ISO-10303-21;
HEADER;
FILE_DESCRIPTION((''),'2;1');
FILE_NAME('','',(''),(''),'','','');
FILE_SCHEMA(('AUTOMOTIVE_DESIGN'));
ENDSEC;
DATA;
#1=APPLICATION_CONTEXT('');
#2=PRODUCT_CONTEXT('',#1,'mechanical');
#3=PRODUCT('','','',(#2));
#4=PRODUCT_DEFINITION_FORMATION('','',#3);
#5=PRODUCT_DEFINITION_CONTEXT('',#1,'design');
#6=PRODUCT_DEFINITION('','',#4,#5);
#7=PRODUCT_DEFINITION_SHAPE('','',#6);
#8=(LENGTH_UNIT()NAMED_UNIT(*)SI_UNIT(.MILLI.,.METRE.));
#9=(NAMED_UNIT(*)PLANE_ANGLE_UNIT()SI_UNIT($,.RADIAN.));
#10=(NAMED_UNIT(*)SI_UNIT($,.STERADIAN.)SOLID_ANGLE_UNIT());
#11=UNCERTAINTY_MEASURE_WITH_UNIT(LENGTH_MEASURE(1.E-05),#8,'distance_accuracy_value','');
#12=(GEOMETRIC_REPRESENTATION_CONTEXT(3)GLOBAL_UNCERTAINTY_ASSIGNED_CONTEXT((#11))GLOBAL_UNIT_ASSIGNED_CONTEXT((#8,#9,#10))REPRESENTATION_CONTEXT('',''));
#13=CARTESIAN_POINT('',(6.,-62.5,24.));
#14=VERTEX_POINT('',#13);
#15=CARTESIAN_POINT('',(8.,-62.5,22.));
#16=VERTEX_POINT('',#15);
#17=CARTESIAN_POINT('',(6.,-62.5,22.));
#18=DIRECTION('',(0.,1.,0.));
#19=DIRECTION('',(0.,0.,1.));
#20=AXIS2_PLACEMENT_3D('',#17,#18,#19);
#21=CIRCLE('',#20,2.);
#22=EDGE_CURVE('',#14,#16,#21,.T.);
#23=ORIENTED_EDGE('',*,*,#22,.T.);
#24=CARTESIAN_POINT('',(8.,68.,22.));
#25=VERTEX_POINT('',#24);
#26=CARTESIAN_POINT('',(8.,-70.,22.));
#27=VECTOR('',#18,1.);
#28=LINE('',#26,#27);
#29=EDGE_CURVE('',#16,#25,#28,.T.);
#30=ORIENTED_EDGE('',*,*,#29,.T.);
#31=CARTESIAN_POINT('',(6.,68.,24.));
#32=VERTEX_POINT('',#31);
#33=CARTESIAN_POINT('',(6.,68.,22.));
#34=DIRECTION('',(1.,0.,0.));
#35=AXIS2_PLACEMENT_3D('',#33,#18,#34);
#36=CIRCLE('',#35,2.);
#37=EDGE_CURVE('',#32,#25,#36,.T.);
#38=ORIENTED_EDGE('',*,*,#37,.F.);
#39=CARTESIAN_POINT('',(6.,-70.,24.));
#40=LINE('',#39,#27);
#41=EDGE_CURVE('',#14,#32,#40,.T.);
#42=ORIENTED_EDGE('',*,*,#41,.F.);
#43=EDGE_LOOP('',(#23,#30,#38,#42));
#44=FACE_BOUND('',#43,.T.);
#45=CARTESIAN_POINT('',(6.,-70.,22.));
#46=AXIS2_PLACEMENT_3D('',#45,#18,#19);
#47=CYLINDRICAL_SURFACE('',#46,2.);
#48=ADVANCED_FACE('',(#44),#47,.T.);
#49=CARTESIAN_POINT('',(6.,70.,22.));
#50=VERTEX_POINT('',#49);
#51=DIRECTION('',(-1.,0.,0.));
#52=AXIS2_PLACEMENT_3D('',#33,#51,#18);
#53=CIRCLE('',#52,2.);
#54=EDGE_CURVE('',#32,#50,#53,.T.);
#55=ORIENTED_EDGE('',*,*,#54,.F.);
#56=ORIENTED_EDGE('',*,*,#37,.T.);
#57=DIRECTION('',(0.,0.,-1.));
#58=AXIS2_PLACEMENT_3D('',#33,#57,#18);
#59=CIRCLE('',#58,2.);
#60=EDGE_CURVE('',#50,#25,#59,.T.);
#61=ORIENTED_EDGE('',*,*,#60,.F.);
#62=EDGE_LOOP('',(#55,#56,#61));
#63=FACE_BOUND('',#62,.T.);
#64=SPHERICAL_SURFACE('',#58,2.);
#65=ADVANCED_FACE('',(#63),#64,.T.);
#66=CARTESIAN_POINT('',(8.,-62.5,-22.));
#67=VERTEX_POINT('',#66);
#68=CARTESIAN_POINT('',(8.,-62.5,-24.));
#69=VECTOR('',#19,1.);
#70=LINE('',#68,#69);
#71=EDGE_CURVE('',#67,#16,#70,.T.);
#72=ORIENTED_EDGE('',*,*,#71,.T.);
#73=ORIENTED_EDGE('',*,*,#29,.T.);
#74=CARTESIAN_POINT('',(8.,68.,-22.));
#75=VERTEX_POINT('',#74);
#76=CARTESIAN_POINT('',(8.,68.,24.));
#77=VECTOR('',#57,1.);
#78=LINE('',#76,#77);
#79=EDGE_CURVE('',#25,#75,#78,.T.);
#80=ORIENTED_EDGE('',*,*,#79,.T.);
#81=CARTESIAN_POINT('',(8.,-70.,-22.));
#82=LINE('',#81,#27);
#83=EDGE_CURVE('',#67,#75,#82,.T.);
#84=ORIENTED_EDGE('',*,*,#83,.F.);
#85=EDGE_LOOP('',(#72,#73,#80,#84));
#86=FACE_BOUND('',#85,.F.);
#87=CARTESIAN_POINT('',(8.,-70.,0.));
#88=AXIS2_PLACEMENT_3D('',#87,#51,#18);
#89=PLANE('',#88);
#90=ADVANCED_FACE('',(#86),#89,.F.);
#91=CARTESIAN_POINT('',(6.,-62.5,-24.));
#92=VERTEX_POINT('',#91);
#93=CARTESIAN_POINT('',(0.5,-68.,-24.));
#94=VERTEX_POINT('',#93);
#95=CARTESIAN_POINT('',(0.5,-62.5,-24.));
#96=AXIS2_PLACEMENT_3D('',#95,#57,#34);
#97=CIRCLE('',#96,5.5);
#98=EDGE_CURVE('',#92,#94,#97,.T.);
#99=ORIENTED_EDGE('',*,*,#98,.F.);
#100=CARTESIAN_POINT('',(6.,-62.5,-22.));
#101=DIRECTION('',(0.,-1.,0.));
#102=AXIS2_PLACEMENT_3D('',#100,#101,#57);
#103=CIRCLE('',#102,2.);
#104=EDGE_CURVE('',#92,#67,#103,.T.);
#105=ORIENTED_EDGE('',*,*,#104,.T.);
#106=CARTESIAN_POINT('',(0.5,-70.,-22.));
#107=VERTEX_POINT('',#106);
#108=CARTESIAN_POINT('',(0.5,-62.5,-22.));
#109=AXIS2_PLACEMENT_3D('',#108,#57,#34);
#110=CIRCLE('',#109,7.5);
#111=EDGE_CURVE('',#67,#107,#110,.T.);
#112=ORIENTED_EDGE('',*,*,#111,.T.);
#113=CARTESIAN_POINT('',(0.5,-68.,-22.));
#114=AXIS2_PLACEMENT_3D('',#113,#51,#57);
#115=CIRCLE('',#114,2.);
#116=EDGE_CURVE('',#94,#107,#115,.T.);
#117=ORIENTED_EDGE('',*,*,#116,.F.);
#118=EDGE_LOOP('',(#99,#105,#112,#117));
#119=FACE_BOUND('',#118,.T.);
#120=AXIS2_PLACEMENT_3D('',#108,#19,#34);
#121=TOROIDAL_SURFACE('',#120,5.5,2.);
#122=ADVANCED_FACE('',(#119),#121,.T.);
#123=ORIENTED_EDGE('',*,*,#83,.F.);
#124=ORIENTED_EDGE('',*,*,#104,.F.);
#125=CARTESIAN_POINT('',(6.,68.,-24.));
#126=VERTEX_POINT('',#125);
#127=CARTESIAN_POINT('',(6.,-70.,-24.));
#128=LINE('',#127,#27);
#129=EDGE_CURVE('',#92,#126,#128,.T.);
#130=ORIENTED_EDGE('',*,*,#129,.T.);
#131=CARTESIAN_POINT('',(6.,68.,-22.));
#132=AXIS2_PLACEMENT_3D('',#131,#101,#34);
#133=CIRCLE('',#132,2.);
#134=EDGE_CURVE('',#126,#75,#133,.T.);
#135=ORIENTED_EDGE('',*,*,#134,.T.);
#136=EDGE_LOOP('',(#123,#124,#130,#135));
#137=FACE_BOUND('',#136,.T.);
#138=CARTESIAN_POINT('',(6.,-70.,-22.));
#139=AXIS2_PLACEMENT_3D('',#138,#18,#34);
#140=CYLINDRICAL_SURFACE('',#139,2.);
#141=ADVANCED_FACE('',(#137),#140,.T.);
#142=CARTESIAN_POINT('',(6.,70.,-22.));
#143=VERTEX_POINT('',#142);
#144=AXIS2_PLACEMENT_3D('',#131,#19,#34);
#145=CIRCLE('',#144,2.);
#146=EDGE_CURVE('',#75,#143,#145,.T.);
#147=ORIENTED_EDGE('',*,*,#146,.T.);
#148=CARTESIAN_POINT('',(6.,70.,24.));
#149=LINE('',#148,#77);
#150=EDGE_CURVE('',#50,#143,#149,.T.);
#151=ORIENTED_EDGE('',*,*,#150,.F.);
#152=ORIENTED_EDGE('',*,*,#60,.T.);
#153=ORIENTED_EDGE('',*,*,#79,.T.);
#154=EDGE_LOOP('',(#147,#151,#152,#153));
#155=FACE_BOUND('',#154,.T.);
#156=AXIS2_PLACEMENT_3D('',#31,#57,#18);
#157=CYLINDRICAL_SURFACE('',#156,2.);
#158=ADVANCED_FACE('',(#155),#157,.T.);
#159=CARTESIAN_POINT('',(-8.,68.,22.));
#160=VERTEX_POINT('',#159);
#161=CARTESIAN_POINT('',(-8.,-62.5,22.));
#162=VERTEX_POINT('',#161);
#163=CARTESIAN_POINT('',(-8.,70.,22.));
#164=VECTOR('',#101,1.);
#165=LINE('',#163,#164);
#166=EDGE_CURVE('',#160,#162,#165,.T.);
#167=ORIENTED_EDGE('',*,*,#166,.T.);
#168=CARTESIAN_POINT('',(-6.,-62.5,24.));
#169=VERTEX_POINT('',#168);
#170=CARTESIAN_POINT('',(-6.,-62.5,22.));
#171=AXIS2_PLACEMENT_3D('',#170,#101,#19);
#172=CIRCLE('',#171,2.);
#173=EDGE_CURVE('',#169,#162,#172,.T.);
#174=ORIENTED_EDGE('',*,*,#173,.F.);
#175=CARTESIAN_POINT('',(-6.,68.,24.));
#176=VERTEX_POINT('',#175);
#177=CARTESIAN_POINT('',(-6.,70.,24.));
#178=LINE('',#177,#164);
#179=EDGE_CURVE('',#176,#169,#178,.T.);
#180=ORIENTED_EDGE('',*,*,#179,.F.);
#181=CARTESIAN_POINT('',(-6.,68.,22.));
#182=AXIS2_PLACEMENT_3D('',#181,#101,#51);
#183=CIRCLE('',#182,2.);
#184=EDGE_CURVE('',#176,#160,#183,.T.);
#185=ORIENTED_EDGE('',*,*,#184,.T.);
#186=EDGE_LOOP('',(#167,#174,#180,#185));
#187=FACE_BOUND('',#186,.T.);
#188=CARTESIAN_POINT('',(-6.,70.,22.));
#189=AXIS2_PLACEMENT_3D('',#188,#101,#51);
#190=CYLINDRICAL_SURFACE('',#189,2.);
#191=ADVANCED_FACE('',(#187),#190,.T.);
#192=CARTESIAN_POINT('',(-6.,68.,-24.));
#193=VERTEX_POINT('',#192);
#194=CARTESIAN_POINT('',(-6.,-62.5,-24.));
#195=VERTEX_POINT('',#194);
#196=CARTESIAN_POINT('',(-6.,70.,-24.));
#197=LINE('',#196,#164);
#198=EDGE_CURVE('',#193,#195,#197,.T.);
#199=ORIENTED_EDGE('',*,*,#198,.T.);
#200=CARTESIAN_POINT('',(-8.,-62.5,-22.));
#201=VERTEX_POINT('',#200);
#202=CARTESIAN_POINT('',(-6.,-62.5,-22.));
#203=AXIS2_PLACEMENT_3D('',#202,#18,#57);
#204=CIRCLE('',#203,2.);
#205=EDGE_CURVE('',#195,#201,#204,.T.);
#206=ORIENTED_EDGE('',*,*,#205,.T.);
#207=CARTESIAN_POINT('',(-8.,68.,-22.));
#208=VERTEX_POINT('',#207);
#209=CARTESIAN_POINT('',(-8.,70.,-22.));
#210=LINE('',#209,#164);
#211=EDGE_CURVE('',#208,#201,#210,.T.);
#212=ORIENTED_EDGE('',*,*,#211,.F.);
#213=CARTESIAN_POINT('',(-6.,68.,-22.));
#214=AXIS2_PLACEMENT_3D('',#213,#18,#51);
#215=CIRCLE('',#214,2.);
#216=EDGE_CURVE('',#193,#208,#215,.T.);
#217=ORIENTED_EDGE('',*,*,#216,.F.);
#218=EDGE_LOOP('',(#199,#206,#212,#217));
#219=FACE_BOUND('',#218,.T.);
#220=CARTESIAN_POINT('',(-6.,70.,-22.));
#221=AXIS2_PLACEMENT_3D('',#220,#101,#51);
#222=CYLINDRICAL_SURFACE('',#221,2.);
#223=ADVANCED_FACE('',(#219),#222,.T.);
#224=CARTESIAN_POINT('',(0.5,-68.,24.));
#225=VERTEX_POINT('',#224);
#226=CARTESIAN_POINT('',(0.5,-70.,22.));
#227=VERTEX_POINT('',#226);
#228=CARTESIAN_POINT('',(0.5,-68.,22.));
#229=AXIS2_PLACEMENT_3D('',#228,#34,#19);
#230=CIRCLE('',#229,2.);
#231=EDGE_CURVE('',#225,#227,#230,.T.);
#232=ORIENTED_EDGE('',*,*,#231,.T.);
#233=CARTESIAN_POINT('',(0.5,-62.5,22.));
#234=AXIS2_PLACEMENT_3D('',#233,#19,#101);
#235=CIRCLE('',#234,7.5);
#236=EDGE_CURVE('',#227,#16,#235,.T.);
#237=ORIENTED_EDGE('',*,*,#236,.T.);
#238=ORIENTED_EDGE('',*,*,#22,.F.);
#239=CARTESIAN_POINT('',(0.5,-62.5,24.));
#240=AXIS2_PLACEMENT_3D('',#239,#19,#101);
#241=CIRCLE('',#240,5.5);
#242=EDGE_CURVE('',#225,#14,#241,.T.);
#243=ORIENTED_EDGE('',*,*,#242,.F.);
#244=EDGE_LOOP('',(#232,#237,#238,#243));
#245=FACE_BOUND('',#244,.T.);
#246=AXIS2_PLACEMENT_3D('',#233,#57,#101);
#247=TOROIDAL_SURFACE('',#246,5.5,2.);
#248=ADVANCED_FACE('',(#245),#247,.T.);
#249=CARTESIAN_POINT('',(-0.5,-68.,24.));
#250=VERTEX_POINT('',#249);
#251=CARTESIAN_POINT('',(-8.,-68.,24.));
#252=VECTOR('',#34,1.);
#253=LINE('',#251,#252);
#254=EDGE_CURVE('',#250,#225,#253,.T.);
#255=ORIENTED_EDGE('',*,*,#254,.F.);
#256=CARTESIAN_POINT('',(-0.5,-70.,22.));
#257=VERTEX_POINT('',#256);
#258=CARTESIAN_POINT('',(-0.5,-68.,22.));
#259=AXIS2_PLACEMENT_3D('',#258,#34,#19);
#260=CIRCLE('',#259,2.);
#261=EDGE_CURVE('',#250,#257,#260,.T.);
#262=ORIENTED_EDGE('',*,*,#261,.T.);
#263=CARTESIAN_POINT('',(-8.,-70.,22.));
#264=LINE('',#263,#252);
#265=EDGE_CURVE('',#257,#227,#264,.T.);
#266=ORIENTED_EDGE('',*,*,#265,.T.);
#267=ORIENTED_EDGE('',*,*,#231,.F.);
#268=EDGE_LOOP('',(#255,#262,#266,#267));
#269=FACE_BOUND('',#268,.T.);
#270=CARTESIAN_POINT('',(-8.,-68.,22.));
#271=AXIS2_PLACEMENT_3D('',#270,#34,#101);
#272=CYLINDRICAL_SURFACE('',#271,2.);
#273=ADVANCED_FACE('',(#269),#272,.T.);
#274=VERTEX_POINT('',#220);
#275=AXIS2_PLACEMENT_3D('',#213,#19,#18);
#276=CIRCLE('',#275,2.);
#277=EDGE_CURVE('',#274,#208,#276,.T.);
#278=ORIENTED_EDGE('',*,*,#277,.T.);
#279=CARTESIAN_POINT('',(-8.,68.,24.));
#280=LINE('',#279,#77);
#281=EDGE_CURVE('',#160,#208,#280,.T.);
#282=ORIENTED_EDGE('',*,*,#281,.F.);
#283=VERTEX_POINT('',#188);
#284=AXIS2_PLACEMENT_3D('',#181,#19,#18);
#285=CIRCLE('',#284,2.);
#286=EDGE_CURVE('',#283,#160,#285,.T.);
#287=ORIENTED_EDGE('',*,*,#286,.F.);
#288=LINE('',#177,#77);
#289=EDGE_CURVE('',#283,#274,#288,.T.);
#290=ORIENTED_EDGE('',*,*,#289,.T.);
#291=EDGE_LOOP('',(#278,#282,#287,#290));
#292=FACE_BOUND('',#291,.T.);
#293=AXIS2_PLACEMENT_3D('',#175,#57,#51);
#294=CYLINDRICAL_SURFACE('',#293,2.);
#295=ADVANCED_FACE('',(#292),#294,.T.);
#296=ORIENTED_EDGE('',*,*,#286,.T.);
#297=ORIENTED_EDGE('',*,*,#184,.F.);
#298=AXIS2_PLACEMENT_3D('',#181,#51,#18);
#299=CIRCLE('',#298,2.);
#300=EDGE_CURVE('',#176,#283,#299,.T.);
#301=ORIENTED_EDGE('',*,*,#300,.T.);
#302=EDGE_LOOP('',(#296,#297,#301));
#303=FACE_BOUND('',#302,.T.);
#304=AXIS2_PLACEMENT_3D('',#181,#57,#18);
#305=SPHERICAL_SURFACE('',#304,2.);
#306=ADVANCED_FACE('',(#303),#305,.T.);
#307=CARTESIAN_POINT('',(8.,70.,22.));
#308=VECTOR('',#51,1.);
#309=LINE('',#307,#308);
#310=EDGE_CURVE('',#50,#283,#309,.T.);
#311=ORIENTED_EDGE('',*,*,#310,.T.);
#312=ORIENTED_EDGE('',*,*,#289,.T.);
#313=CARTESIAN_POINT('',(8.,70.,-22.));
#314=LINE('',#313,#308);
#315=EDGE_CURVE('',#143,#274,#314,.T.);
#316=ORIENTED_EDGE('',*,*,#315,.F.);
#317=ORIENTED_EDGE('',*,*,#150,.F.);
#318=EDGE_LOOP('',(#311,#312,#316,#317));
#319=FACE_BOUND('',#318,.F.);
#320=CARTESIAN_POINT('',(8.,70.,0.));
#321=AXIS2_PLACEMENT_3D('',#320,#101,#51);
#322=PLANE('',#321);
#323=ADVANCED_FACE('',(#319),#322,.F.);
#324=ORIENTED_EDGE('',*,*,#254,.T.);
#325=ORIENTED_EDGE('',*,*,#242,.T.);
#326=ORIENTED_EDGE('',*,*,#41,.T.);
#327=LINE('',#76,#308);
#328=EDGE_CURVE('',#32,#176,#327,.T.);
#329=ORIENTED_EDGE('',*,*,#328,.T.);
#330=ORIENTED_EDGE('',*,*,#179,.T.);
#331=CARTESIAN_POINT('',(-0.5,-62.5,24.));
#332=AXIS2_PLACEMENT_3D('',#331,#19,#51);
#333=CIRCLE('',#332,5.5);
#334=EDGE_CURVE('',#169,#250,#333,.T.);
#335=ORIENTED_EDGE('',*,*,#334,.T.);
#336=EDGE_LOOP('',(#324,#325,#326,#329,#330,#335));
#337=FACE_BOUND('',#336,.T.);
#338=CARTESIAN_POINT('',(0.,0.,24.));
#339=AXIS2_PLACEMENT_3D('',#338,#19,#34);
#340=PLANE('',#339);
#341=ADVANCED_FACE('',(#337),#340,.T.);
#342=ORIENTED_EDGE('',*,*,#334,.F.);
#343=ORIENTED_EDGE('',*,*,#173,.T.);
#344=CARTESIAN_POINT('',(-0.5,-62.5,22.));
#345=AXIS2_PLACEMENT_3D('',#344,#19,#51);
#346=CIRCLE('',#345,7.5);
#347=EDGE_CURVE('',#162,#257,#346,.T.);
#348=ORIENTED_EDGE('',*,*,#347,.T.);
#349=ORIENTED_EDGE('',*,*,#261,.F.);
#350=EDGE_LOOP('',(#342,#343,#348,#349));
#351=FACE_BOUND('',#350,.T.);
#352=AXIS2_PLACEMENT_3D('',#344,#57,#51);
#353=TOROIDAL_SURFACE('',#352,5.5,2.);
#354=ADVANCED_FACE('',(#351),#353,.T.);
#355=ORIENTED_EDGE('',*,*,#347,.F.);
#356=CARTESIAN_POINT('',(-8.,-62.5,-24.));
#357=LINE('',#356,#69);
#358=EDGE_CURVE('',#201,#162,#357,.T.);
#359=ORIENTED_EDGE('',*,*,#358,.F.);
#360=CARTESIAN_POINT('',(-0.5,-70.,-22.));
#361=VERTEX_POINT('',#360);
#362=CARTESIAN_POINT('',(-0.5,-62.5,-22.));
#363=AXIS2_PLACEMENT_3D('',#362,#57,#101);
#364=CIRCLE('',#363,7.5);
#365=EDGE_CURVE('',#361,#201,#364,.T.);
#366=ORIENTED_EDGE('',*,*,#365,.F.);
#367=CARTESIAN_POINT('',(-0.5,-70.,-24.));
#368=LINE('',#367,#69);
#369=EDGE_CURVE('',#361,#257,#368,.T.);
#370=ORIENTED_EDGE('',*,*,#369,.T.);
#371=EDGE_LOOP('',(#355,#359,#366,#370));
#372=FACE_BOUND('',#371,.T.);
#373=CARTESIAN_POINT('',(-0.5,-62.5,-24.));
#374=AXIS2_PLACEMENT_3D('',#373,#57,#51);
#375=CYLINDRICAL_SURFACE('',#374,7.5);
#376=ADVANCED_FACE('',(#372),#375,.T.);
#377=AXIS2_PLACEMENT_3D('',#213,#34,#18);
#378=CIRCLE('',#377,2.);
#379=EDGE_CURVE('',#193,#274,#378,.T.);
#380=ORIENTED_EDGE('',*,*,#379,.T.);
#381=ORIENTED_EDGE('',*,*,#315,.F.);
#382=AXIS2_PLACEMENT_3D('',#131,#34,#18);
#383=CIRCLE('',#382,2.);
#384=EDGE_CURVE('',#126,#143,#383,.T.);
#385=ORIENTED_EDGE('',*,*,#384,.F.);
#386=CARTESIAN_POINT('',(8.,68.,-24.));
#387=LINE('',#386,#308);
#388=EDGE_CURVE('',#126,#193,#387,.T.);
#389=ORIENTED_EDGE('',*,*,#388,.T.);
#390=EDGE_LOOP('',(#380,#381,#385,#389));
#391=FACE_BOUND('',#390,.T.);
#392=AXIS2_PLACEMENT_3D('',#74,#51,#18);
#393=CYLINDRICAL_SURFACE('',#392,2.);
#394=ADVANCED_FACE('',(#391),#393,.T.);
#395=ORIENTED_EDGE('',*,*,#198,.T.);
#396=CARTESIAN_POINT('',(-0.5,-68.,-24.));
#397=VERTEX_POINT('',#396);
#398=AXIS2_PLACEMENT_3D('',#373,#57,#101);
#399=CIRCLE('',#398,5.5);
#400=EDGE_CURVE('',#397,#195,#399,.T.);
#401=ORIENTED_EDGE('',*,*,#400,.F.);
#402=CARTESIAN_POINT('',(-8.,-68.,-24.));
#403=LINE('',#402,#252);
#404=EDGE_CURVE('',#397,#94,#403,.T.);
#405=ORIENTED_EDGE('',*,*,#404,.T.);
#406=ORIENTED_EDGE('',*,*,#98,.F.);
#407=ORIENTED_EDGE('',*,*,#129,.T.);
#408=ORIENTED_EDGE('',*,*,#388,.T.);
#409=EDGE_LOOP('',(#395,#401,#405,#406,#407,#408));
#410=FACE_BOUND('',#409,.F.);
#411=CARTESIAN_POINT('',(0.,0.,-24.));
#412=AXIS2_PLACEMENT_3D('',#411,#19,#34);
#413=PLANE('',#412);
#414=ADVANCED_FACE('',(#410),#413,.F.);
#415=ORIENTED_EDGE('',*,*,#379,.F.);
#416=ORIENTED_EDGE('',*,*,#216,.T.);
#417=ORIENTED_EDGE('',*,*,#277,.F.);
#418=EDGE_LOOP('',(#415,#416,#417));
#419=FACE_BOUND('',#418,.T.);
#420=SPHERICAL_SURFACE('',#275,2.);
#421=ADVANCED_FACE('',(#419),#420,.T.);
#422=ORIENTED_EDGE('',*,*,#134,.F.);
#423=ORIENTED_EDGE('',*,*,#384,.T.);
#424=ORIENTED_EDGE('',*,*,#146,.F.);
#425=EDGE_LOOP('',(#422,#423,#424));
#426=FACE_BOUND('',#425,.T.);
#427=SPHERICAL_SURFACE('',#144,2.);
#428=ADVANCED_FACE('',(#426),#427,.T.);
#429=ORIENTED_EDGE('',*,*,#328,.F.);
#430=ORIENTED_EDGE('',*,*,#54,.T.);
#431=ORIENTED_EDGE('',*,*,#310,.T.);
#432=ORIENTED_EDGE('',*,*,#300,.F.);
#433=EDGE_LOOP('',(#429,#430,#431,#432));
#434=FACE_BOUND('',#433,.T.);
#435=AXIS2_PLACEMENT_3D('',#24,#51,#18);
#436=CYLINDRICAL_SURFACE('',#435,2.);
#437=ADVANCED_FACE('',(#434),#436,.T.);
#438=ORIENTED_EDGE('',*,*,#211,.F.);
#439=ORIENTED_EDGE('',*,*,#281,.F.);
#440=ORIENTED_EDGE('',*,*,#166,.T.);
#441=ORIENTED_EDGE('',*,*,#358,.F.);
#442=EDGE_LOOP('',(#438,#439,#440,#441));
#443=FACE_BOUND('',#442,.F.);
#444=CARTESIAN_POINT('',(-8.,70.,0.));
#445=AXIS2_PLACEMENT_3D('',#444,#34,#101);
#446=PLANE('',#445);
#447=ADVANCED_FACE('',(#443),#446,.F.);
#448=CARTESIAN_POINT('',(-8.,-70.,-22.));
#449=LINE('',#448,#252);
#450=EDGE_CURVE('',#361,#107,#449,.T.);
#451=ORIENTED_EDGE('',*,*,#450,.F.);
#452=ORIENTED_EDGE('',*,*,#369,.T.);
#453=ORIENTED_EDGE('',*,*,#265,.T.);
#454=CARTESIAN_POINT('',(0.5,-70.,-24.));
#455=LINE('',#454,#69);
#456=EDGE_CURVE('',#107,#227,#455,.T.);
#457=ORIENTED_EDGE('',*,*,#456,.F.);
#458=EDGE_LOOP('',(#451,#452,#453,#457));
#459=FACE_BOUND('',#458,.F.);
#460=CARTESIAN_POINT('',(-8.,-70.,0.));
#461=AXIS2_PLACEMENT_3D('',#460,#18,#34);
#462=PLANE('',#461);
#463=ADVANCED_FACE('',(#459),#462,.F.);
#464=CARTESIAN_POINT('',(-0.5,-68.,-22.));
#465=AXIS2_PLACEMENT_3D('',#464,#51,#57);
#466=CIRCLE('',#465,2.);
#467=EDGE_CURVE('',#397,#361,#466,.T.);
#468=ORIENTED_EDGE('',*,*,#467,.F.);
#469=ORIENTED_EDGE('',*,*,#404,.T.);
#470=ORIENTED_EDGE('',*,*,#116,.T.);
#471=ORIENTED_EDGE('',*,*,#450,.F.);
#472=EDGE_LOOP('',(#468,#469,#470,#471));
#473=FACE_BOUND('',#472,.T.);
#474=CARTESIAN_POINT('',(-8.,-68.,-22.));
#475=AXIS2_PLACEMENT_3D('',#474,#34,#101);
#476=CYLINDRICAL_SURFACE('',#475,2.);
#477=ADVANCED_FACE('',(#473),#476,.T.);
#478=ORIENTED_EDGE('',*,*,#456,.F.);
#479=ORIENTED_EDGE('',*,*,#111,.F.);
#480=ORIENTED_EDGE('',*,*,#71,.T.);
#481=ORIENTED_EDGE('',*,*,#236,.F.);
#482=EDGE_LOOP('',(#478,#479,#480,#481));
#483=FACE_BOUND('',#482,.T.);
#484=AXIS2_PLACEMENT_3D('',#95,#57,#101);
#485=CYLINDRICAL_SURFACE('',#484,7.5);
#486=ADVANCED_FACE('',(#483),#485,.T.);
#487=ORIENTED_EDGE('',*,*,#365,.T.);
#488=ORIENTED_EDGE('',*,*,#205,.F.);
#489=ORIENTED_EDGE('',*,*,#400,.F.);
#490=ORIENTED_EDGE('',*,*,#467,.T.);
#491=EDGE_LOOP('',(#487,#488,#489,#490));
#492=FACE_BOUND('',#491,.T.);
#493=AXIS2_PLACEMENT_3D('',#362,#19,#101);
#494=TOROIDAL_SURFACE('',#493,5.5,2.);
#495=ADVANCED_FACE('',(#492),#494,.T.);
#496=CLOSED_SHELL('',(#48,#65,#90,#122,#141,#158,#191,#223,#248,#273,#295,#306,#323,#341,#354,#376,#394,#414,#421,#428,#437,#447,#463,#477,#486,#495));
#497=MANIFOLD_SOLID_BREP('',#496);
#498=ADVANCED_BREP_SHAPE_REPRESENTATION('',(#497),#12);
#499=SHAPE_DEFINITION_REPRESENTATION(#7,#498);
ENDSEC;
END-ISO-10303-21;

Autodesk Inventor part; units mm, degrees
ref_plane "YZ Plane" through (0, 0, 0) normal (1, 0, 0) x (0, 1, 0)
ref_plane "XZ Plane" through (0, 0, 0) normal (0, 1, 0) x (-1, 0, 0)
ref_plane "XY Plane" through (0, 0, 0) normal (0, 0, 1) x (1, 0, 0)
sketch "Sketch1" plane through (0, 0, 0) normal (0, 0, 1) x (1, 0, 0)
  line L0 (-8, -70) -> (8, -70)
  line L1 (8, -70) -> (8, 70)
  line L2 (8, 70) -> (-8, 70)
  line L3 (-8, 70) -> (-8, -70)
  line L4 (-8, -70) -> (8, 70) construction
  line L5 (8, -70) -> (-8, 70) construction
  point P0 (0, 0)
  dimension "d0" = 16
  dimension "d1" = 140
extrude "Extrusion1" add sketch "Sketch1" along normal mid plane 48
fillet "Fillet1" radius 2 10 edges at (8, 70, 0) (-8, 70, 0) (0, 70, 24) (8, 0, 24) (-8, 0, 24) (8, 0, -24) (0, 70, -24) (-8, 0, -24) (0, -70, 24) (0, -70, -24)
fillet "Fillet2" radius 7.5 6 edges at (7.4142, -69.4142, 23.4142) (7.4142, -69.4142, -23.4142) (8, -70, 0) (-7.4142, -69.4142, 23.4142) (-7.4142, -69.4142, -23.4142) (-8, -70, 0)
properties part number "Lipo-3250-3S-Pack-3" material "Acetal Resin, Black"
